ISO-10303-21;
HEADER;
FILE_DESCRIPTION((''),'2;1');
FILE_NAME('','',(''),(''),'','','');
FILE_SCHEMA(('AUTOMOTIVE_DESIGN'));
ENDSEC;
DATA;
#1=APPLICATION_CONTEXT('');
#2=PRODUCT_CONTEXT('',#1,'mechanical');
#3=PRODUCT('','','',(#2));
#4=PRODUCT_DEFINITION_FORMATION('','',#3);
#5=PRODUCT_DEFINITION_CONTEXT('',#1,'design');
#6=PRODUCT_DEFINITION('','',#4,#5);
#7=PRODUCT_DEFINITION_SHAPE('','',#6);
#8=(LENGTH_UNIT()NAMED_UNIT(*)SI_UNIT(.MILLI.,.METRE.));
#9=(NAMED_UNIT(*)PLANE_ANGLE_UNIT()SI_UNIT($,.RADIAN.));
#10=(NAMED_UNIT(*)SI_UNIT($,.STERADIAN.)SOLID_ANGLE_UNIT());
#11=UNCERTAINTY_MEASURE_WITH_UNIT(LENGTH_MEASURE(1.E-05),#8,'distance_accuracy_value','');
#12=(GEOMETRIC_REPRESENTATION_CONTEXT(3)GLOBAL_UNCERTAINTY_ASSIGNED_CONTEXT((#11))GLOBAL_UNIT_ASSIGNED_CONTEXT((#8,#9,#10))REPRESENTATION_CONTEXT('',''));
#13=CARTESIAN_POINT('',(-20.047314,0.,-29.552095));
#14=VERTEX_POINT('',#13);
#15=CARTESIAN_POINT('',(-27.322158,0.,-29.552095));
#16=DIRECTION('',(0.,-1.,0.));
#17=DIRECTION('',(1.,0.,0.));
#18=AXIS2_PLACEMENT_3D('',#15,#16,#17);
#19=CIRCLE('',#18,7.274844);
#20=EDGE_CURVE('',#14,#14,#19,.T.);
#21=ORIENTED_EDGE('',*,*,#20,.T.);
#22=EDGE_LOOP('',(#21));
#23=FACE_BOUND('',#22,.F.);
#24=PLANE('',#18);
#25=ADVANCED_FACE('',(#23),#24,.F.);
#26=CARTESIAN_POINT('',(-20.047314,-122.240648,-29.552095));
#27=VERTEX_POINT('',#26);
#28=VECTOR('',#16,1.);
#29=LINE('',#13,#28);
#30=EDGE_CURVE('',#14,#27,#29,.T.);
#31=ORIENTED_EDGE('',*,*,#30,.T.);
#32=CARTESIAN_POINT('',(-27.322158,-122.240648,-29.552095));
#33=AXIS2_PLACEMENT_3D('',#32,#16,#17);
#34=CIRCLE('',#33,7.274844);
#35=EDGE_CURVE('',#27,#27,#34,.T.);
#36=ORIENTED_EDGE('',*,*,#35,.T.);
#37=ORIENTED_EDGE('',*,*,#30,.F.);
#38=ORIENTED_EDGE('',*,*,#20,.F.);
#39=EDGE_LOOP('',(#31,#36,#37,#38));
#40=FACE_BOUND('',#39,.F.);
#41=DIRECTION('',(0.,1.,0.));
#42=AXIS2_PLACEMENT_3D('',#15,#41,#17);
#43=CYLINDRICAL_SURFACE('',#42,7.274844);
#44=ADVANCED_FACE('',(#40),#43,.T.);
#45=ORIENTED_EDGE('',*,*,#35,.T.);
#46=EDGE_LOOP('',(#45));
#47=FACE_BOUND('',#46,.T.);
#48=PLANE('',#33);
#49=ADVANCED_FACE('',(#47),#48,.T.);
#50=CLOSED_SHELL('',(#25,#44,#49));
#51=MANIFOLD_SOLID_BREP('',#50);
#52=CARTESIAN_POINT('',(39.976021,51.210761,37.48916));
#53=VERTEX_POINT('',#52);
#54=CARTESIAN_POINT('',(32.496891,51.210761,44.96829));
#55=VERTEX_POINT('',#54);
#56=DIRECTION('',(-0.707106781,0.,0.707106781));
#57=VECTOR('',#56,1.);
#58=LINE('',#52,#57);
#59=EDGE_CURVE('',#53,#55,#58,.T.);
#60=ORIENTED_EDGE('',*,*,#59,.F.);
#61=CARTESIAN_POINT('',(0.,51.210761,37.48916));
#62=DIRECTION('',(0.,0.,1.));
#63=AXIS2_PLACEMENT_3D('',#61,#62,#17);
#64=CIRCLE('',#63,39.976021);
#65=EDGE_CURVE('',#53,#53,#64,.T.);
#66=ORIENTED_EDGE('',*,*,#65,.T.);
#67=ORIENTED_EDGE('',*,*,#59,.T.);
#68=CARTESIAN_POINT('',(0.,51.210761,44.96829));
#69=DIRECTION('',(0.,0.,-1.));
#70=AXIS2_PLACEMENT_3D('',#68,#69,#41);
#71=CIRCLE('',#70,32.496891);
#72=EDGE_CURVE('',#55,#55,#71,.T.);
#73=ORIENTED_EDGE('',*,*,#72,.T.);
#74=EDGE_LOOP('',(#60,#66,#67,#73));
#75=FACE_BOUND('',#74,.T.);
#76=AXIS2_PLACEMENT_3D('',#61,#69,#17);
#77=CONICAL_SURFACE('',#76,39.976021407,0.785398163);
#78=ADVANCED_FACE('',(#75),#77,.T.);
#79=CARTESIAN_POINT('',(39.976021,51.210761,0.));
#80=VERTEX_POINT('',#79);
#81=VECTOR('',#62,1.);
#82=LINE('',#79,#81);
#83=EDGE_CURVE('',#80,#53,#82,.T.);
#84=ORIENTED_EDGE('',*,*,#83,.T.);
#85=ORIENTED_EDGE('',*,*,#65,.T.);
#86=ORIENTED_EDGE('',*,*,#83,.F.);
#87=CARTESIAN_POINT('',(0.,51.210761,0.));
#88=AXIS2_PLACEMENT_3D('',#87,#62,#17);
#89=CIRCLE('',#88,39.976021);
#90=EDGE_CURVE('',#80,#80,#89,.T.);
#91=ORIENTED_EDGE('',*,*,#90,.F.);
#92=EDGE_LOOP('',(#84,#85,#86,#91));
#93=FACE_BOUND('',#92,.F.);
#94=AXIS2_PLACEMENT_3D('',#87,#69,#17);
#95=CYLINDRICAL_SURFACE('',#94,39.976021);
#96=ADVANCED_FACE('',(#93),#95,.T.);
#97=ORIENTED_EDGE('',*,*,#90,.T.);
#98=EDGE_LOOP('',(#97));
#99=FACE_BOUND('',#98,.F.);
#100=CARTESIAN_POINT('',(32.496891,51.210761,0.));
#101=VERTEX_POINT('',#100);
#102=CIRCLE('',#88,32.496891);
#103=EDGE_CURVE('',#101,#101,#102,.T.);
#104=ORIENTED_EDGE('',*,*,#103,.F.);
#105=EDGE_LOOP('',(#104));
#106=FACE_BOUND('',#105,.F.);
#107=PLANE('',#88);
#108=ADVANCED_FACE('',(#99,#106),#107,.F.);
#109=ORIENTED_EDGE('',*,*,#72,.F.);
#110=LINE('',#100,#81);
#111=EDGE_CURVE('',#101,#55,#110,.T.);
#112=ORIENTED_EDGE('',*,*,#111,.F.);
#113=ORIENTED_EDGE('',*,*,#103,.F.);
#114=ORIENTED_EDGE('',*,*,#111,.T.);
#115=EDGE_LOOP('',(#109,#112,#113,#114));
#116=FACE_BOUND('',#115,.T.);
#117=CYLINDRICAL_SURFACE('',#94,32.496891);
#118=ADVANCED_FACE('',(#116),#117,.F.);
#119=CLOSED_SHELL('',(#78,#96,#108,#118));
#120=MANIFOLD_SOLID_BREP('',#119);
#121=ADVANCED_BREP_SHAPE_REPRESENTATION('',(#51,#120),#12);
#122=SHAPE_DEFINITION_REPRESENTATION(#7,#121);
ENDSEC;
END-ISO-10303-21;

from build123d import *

# Parameters (mm, degrees)
F0_R     = 39.9760214069
F0_R_2   = 32.4968914301
F1_DEPTH = 45.1091602445
F3_R     = 7.2748439962
F4_DEPTH = 122.2406476736


# Not quite as in the source:
# - a fillet or chamfer that OpenCascade refuses, or shapes differently, is made with other operations: its cross-section is extruded or revolved along the edge and cut away or added


with BuildPart() as f1:
    # F0 (on Top) → F1 (new body)
    with BuildSketch(Plane.XY):
        with Locations((0, 51.2107610703)):
            Circle(F0_R)
        with Locations((0, 51.2107610703)):
            Circle(F0_R_2, mode=Mode.SUBTRACT)
    extrude(amount=F1_DEPTH)

    # F2: chamfer of 7.62 on 1 edges, made by hand

    # F2_s1 → F2_t2 (revolve, cut)
    with BuildSketch(Plane.XZ.offset(-51.2107610703)):
        Polygon((39.9760214069, 37.4891602445), (32.3560214069, 45.1091602445), (39.9760214069, 45.1091602445), align=None)
    revolve(axis=Axis((0, 51.2107610703, 45.1091602445), (0, 0, 1)), mode=Mode.SUBTRACT)


with BuildPart() as f4:
    # F3 (on Front) → F4 (new body)
    with BuildSketch(Plane.XZ):
        with Locations((-27.3221582174, -29.5520946383)):
            Circle(F3_R)
    extrude(amount=F4_DEPTH)


solid = Compound([f1.part, f4.part])
